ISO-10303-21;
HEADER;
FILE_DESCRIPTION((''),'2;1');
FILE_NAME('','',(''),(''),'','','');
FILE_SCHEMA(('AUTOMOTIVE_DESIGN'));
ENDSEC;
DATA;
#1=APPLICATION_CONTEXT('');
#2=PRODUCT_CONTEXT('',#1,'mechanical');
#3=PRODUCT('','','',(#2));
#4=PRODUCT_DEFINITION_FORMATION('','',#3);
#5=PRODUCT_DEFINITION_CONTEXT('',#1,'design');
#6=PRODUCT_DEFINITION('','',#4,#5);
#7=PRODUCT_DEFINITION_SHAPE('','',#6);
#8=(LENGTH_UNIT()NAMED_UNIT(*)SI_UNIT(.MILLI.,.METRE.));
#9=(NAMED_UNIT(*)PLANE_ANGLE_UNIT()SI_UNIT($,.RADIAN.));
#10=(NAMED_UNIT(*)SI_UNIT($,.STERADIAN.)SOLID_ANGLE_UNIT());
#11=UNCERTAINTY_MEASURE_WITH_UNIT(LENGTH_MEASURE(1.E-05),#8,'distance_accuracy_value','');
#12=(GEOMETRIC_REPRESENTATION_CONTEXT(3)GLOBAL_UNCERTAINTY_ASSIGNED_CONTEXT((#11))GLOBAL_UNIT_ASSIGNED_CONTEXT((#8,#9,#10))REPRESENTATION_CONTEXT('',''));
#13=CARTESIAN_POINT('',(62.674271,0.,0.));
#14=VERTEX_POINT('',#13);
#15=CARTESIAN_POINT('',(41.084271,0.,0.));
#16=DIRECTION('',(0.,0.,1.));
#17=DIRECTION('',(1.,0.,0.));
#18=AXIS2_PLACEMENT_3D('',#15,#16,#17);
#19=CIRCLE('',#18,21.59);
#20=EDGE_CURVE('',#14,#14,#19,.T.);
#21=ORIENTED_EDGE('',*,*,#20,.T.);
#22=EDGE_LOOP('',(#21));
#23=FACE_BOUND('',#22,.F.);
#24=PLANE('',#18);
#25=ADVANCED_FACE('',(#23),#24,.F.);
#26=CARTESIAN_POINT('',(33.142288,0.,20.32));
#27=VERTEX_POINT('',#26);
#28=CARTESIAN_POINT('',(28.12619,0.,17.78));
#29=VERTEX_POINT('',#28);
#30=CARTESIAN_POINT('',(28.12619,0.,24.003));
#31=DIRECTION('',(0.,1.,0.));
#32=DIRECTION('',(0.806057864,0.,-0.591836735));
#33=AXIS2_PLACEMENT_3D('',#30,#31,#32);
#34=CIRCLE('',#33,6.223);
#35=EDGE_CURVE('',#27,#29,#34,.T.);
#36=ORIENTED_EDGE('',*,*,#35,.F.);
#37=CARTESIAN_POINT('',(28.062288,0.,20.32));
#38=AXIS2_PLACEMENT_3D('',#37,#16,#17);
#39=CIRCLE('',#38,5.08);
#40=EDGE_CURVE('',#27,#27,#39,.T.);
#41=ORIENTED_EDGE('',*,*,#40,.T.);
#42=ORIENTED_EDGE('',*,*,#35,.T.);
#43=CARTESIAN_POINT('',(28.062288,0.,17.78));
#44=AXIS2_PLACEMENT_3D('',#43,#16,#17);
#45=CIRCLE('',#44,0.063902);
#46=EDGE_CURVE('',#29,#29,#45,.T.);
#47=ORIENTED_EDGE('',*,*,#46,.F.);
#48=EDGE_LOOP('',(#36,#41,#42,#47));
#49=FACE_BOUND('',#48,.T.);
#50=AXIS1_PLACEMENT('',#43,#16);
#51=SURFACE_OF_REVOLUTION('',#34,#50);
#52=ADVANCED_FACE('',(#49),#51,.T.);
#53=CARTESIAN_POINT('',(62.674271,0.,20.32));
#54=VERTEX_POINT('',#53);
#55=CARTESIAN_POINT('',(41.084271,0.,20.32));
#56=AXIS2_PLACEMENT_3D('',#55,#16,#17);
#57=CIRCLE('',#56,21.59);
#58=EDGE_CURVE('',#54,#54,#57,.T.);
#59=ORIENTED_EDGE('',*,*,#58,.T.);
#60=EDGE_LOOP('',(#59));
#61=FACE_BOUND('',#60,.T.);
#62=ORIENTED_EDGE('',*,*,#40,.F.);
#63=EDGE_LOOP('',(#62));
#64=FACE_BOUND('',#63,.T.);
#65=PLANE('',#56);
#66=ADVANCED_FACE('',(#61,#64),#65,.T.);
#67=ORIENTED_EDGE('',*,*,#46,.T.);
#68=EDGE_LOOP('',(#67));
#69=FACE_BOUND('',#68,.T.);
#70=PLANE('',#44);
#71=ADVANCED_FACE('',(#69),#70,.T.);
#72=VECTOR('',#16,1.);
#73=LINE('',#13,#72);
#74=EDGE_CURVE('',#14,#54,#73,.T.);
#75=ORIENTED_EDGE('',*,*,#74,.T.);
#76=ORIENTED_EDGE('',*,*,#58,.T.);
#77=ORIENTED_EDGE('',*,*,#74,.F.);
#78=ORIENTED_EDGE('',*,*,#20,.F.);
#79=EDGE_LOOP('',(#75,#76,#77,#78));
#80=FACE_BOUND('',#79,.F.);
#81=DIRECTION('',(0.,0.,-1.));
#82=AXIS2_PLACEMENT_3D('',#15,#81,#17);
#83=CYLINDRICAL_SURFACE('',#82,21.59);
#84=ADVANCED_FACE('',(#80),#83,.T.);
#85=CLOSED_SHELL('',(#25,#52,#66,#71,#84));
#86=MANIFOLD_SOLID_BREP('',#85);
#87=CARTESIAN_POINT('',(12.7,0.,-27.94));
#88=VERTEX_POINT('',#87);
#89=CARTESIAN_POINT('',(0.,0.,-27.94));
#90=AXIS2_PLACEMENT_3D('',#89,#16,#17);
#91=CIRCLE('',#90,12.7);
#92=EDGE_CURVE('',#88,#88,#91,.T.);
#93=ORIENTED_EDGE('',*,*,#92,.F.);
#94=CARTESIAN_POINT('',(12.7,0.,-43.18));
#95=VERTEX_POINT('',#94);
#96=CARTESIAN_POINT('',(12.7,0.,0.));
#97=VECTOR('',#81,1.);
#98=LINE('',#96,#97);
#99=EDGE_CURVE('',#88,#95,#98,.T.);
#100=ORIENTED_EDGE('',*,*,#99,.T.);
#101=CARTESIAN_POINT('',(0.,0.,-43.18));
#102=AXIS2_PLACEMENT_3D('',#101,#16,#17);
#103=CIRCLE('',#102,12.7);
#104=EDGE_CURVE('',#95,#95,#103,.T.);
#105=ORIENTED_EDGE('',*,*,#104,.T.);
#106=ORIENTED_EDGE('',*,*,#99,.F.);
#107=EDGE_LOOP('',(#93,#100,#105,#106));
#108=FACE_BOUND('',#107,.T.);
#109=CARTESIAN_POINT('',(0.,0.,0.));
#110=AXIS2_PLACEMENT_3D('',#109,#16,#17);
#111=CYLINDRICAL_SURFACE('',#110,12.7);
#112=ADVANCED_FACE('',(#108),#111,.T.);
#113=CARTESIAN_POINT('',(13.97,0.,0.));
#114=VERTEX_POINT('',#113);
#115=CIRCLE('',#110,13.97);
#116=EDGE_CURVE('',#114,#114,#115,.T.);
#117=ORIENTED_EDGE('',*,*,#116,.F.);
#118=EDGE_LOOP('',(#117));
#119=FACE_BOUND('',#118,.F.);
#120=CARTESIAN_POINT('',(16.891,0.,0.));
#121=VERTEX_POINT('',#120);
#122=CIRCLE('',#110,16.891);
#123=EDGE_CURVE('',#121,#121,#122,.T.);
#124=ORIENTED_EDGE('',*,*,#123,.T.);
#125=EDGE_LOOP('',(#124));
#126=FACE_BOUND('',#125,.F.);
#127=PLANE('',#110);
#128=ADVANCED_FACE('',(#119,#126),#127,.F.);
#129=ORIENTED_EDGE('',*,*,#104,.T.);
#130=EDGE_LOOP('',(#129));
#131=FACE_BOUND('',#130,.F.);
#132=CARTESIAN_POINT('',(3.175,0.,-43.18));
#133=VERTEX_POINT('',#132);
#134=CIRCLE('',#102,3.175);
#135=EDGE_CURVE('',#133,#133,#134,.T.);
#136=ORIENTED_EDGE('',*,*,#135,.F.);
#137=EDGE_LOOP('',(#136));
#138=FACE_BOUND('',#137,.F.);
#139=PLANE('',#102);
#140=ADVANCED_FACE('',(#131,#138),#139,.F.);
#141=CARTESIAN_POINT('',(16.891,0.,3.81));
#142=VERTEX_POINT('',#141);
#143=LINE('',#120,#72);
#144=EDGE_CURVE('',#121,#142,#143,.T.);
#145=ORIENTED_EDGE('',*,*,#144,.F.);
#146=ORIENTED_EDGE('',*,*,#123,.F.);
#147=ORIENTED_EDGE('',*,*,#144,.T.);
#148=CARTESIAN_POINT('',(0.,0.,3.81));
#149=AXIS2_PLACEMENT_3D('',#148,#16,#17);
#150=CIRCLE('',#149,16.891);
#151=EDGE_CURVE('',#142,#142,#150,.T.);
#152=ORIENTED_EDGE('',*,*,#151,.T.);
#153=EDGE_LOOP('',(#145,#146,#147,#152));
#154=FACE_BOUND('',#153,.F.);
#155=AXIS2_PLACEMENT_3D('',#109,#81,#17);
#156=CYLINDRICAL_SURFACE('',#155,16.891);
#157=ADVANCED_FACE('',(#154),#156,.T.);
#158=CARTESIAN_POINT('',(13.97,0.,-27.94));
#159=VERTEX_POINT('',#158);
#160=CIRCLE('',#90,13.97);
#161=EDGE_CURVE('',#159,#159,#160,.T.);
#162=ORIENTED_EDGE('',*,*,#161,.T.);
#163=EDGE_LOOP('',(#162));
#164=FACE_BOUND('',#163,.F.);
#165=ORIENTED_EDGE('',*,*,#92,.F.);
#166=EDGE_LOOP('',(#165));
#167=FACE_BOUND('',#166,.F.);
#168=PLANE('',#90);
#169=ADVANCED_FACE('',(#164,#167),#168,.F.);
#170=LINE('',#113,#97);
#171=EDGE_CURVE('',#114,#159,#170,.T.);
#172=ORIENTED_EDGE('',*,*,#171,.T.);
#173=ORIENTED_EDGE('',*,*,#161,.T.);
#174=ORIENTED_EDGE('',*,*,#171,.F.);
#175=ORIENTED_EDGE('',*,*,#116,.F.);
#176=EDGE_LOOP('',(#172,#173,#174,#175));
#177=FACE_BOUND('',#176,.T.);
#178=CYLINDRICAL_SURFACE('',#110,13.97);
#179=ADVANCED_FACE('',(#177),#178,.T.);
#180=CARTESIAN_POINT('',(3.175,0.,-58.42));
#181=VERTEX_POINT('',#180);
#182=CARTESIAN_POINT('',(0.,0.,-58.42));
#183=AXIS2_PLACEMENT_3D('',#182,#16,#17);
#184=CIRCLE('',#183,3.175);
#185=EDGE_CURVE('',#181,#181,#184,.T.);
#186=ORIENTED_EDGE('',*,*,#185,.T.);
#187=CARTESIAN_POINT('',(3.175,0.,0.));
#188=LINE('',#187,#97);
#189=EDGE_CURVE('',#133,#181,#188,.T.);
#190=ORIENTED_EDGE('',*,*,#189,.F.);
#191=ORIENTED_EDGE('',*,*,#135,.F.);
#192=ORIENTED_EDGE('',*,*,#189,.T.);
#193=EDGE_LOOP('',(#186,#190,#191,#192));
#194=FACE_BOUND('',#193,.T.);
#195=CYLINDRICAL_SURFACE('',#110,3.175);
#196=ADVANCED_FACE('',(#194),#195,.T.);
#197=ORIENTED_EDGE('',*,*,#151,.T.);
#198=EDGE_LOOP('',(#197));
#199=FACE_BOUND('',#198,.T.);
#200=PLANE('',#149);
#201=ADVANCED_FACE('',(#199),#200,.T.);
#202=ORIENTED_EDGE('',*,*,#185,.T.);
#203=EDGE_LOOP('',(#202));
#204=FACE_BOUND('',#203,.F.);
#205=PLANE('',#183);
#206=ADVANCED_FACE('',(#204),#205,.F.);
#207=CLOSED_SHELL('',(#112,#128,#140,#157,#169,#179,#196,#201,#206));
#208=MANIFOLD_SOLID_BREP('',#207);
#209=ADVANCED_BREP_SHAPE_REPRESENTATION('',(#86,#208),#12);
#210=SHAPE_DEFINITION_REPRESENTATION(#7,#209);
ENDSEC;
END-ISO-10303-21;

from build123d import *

# Parameters (mm, degrees)
F0_R     = 3.175
F1_DEPTH = 58.42
F0_R_2   = 12.7
F2_DEPTH = 43.18
F0_R_3   = 13.97
F3_DEPTH = 27.94
F0_R_4   = 16.891
F4_DEPTH = 3.81
F0_R_5   = 21.59
F5_DEPTH = 20.32
F6_R     = 5.08
F7_DEPTH = 2.54


# Not quite as in the source:
# - a fillet or chamfer that OpenCascade refuses, or shapes differently, is made with other operations: its cross-section is extruded or revolved along the edge and cut away or added


with BuildPart() as f1:
    # F0 (on Top) → F1 (new body)
    with BuildSketch(Plane.XY):
        Circle(F0_R)
    extrude(amount=-F1_DEPTH)

    # F0 (on Top) → F2 (join)
    with BuildSketch(Plane.XY):
        Circle(F0_R_2)
        Circle(F0_R, mode=Mode.SUBTRACT)
    extrude(amount=-F2_DEPTH)

    # F0 (on Top) → F3 (join)
    with BuildSketch(Plane.XY):
        Circle(F0_R_3)
        Circle(F0_R_2, mode=Mode.SUBTRACT)
    extrude(amount=-F3_DEPTH)

    # F0 (on Top) → F4 (join)
    with BuildSketch(Plane.XY):
        Circle(F0_R_4)
        Circle(F0_R_3, mode=Mode.SUBTRACT)
        Circle(F0_R_3)
        Circle(F0_R_2, mode=Mode.SUBTRACT)
        Circle(F0_R_2)
        Circle(F0_R, mode=Mode.SUBTRACT)
        Circle(F0_R)
    extrude(amount=F4_DEPTH)


with BuildPart() as f5:
    # F0 (on Top) → F5 (new body)
    with BuildSketch(Plane.XY):
        with Locations((41.0842709243, 0)):
            Circle(F0_R_5)
    extrude(amount=F5_DEPTH)

    # F6 (on face) → F7 (cut)
    with BuildSketch(Plane.XY.offset(20.32)):
        with Locations((28.0622877181, 0)):
            Circle(F6_R)
    extrude(amount=-F7_DEPTH, mode=Mode.SUBTRACT)

    # F8: fillet of radius 6.223 on 1 edges, made by hand

    # F8_s1 → F8_t2 (revolve)
    with BuildSketch(Plane.XZ):
        with BuildLine():
            ThreePointArc((33.1422877181, 20.32), (30.9374544728, 18.4511967794), (28.1261896329, 17.78))
            Line((28.1261896329, 17.78), (33.1422877181, 17.78))
            Line((33.1422877181, 17.78), (33.1422877181, 20.32))
        make_face()
    revolve(axis=Axis((28.0622877181, 0, 17.78), (0, 0, 1)))


solid = Compound([f1.part, f5.part])
